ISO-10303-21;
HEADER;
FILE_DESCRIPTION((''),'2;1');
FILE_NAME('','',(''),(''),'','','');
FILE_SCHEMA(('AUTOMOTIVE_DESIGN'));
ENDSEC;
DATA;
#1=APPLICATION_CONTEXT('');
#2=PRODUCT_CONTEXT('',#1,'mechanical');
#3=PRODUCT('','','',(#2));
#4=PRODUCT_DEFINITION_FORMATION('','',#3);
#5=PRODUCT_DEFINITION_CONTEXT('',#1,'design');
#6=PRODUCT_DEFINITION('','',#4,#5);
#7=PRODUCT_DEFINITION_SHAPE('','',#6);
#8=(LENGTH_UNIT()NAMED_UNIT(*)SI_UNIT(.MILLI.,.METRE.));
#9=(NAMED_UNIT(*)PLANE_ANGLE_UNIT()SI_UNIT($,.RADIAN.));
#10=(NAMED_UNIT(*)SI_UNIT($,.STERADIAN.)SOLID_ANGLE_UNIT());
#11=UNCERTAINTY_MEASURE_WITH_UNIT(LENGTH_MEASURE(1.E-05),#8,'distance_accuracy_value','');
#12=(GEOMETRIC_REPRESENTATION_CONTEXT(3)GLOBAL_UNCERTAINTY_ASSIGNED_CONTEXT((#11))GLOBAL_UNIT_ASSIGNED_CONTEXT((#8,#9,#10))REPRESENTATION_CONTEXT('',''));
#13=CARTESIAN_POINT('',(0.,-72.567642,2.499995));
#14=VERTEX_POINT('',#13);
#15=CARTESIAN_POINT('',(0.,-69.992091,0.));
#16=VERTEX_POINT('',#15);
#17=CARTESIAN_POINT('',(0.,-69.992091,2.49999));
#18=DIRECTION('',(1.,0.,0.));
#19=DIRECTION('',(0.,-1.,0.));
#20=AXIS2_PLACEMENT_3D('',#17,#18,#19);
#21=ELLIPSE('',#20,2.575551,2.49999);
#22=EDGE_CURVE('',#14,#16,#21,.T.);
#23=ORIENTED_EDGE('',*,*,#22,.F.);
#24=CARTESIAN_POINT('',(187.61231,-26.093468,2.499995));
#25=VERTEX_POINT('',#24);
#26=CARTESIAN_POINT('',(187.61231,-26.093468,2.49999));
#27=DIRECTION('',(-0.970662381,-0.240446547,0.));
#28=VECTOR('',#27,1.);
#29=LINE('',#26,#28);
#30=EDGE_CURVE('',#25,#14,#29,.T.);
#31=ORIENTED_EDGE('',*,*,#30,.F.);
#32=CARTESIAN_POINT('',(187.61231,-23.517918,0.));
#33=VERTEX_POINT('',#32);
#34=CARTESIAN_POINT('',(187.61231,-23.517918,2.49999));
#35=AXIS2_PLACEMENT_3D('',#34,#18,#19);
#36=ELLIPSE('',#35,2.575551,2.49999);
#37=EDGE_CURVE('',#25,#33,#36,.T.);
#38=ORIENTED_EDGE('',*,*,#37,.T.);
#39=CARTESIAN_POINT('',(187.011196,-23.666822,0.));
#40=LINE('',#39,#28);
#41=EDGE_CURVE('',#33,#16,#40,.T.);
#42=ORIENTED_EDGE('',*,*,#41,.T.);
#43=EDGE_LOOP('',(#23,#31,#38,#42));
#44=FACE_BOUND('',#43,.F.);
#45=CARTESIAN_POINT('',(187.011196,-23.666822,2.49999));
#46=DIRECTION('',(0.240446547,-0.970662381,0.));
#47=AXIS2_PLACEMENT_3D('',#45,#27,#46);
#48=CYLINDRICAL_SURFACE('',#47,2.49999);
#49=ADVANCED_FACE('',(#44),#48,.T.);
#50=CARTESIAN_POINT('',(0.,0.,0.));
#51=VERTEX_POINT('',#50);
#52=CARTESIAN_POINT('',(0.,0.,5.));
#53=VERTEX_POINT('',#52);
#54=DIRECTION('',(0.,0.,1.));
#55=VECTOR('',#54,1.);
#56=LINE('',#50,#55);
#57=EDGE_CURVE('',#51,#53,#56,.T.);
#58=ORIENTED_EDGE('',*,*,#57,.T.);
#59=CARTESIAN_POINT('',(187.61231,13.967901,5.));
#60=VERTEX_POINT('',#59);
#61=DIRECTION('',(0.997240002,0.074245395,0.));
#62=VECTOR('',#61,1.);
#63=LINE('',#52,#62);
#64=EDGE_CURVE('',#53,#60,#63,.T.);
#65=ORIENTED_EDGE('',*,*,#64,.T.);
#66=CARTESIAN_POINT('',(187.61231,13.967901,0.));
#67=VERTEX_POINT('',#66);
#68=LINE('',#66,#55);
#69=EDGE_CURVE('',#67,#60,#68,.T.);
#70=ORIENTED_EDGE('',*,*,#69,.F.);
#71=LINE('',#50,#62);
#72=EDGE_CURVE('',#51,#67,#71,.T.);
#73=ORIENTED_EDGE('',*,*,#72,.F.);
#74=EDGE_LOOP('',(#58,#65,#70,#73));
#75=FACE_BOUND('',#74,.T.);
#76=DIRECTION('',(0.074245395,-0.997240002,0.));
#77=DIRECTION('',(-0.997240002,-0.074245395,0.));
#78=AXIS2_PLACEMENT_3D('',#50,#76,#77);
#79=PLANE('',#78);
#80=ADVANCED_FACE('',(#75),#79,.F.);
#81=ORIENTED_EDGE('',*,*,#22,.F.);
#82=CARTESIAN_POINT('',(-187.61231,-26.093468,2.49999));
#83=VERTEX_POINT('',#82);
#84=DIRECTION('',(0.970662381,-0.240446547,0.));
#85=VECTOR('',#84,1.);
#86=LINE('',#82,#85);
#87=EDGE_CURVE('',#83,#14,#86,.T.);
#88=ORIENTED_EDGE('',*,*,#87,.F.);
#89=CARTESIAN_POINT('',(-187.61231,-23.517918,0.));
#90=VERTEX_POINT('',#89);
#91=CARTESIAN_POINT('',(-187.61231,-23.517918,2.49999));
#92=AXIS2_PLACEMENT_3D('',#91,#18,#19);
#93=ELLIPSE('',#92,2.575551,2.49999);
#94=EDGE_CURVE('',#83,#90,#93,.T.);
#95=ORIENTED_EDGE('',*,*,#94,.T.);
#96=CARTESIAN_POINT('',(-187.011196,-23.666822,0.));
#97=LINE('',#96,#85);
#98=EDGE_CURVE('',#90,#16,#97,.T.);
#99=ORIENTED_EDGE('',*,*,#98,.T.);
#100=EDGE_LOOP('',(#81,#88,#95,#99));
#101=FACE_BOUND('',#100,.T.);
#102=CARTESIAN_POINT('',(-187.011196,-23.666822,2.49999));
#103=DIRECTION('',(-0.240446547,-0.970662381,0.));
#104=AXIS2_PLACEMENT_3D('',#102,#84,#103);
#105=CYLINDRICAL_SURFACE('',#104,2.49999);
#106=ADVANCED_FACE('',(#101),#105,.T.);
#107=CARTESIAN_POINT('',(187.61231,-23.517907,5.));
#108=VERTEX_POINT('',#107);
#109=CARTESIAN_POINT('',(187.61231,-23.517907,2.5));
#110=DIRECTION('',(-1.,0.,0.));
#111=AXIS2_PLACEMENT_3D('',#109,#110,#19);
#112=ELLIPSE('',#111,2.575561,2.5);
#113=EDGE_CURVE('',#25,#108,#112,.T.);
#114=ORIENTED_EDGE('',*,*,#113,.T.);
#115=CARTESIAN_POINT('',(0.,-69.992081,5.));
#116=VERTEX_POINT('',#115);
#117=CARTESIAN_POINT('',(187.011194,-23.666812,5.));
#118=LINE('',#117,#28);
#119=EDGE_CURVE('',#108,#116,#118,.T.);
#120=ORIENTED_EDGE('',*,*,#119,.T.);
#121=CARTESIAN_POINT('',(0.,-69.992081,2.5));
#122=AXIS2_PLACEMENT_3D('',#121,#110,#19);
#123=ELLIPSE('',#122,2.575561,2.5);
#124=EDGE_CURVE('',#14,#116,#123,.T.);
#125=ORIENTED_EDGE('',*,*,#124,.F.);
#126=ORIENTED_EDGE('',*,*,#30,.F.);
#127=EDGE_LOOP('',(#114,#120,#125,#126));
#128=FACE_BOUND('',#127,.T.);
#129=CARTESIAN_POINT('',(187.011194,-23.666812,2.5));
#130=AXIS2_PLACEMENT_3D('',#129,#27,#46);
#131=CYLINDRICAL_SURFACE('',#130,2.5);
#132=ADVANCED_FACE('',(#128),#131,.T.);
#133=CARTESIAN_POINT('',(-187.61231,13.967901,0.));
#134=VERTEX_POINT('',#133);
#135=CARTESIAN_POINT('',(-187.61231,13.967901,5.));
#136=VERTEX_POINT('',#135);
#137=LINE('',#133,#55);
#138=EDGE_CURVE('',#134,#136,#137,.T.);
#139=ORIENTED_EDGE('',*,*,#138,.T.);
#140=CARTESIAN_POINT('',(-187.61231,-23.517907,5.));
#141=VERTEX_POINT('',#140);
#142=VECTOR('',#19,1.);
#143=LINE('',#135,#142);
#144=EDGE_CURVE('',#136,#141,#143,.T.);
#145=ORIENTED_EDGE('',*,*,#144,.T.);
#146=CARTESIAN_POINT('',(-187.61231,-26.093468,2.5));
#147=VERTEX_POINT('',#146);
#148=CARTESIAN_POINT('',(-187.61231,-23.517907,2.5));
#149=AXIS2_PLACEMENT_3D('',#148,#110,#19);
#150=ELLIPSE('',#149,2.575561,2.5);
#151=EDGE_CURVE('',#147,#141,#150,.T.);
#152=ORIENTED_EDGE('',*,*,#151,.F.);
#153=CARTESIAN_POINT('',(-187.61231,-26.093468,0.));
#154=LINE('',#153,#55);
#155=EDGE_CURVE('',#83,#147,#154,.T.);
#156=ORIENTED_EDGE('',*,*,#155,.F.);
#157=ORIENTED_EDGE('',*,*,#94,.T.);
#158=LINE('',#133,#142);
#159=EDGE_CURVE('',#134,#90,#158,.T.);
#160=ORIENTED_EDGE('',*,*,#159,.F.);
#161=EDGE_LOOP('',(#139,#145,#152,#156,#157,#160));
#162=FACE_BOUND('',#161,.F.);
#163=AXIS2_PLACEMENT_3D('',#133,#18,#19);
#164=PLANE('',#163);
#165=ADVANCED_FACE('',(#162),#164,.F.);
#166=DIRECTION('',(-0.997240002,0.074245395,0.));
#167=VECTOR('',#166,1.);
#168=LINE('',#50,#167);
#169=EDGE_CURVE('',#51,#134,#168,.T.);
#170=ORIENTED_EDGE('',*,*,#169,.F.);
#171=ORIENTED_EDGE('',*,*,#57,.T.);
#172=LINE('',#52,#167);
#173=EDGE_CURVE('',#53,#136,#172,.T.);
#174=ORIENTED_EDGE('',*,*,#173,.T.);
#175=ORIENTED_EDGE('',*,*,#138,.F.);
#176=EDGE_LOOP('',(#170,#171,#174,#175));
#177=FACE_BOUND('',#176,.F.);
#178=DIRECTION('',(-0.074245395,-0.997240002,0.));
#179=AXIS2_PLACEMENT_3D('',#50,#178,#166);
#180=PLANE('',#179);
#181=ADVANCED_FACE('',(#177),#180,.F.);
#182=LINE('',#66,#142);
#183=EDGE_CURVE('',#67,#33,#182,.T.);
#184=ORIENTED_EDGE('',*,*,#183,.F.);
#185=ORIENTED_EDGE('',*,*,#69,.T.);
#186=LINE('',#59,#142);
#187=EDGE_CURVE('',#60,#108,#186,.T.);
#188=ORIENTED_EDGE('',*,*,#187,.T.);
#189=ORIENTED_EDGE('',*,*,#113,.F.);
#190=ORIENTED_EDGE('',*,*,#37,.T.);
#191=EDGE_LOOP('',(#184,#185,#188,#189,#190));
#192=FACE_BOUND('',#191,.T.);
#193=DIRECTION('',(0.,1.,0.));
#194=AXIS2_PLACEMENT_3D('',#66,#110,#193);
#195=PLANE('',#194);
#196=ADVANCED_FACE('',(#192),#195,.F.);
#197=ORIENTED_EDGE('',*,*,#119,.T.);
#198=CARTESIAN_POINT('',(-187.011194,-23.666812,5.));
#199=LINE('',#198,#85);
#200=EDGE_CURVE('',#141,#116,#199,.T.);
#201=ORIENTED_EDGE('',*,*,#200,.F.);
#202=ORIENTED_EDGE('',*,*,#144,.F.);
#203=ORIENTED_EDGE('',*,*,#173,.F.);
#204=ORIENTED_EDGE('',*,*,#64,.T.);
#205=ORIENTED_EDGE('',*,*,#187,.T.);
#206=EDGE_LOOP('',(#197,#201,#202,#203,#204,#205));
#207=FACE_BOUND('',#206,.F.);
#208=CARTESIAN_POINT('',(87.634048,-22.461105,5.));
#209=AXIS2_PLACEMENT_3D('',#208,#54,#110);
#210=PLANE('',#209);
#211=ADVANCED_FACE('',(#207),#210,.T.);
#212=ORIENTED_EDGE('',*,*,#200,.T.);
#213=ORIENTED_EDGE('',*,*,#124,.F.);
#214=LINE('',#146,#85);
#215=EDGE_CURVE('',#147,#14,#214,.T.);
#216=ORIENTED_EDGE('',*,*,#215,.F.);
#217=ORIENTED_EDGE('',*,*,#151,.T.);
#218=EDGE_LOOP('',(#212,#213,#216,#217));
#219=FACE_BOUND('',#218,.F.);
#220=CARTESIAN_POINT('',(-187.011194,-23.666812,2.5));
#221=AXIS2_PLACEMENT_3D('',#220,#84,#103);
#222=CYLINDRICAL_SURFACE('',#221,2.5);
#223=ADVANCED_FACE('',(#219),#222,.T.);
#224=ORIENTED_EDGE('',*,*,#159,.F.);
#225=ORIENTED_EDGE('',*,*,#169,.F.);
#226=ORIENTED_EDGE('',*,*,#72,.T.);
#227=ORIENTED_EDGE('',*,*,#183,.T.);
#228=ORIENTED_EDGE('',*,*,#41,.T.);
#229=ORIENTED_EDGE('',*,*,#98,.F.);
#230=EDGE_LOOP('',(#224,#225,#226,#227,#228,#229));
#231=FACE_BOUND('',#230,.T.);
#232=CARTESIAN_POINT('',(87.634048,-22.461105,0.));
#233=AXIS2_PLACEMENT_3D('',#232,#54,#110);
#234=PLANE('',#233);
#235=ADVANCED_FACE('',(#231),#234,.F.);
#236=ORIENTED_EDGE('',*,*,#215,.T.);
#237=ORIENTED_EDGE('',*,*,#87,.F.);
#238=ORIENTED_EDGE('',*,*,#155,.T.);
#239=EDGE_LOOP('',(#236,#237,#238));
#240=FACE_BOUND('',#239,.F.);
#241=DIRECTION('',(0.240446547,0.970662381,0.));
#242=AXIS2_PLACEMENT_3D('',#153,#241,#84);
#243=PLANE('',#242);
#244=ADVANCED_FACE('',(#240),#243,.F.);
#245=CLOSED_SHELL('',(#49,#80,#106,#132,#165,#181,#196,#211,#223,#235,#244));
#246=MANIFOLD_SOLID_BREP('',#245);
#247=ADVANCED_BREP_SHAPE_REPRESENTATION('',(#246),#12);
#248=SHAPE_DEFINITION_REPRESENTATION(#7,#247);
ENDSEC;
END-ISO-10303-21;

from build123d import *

# Parameters (mm, degrees)
F1_DEPTH = 5
F2_R     = 2.5
F3_R     = 2.49999
F7_ANGLE = 180


# Not quite as in the source:
# - a fillet or chamfer is up to 0.001 mm smaller than in the source, because OpenCascade refuses the exact size


with BuildPart() as f1:
    # F0 (on Top) → F1 (new body)
    with BuildSketch(Plane.XY):
        Polygon((0, 72.5676417351), (0, 0), (187.6123100519, -13.9679014683), (187.6123100519, 26.09346807), align=None)
    extrude(amount=F1_DEPTH)

    # F2
    f2_edges = [f1.edges().sort_by_distance(p)[0] for p in [
        (93.806155, 49.330555, 5),
    ]]
    fillet(f2_edges, radius=F2_R)

    # F3 (radius 2.5 in the source; OpenCascade refuses exactly that, so slightly less here)
    f3_edges = [f1.edges().sort_by_distance(p)[0] for p in [
        (93.806155, 49.330555, 0),
    ]]
    fillet(f3_edges, radius=F3_R)


with BuildPart() as f4_1:
    # F4: instance of F1
    add(f1.part.mirror(Plane.YZ))


with BuildPart() as f1_1:
    add(f1.part)

    add(f4_1.part)  # F5 merges F4_1
    # F5: F1 across plane
    add(f1.part.mirror(Plane.YZ))


with BuildPart() as f1_2:
    # F7: moved
    add(f1_1.part.rotate(Axis((0, 0, 62.2569620609), (0, 0, 1)), F7_ANGLE))


solid = f1_2.part
